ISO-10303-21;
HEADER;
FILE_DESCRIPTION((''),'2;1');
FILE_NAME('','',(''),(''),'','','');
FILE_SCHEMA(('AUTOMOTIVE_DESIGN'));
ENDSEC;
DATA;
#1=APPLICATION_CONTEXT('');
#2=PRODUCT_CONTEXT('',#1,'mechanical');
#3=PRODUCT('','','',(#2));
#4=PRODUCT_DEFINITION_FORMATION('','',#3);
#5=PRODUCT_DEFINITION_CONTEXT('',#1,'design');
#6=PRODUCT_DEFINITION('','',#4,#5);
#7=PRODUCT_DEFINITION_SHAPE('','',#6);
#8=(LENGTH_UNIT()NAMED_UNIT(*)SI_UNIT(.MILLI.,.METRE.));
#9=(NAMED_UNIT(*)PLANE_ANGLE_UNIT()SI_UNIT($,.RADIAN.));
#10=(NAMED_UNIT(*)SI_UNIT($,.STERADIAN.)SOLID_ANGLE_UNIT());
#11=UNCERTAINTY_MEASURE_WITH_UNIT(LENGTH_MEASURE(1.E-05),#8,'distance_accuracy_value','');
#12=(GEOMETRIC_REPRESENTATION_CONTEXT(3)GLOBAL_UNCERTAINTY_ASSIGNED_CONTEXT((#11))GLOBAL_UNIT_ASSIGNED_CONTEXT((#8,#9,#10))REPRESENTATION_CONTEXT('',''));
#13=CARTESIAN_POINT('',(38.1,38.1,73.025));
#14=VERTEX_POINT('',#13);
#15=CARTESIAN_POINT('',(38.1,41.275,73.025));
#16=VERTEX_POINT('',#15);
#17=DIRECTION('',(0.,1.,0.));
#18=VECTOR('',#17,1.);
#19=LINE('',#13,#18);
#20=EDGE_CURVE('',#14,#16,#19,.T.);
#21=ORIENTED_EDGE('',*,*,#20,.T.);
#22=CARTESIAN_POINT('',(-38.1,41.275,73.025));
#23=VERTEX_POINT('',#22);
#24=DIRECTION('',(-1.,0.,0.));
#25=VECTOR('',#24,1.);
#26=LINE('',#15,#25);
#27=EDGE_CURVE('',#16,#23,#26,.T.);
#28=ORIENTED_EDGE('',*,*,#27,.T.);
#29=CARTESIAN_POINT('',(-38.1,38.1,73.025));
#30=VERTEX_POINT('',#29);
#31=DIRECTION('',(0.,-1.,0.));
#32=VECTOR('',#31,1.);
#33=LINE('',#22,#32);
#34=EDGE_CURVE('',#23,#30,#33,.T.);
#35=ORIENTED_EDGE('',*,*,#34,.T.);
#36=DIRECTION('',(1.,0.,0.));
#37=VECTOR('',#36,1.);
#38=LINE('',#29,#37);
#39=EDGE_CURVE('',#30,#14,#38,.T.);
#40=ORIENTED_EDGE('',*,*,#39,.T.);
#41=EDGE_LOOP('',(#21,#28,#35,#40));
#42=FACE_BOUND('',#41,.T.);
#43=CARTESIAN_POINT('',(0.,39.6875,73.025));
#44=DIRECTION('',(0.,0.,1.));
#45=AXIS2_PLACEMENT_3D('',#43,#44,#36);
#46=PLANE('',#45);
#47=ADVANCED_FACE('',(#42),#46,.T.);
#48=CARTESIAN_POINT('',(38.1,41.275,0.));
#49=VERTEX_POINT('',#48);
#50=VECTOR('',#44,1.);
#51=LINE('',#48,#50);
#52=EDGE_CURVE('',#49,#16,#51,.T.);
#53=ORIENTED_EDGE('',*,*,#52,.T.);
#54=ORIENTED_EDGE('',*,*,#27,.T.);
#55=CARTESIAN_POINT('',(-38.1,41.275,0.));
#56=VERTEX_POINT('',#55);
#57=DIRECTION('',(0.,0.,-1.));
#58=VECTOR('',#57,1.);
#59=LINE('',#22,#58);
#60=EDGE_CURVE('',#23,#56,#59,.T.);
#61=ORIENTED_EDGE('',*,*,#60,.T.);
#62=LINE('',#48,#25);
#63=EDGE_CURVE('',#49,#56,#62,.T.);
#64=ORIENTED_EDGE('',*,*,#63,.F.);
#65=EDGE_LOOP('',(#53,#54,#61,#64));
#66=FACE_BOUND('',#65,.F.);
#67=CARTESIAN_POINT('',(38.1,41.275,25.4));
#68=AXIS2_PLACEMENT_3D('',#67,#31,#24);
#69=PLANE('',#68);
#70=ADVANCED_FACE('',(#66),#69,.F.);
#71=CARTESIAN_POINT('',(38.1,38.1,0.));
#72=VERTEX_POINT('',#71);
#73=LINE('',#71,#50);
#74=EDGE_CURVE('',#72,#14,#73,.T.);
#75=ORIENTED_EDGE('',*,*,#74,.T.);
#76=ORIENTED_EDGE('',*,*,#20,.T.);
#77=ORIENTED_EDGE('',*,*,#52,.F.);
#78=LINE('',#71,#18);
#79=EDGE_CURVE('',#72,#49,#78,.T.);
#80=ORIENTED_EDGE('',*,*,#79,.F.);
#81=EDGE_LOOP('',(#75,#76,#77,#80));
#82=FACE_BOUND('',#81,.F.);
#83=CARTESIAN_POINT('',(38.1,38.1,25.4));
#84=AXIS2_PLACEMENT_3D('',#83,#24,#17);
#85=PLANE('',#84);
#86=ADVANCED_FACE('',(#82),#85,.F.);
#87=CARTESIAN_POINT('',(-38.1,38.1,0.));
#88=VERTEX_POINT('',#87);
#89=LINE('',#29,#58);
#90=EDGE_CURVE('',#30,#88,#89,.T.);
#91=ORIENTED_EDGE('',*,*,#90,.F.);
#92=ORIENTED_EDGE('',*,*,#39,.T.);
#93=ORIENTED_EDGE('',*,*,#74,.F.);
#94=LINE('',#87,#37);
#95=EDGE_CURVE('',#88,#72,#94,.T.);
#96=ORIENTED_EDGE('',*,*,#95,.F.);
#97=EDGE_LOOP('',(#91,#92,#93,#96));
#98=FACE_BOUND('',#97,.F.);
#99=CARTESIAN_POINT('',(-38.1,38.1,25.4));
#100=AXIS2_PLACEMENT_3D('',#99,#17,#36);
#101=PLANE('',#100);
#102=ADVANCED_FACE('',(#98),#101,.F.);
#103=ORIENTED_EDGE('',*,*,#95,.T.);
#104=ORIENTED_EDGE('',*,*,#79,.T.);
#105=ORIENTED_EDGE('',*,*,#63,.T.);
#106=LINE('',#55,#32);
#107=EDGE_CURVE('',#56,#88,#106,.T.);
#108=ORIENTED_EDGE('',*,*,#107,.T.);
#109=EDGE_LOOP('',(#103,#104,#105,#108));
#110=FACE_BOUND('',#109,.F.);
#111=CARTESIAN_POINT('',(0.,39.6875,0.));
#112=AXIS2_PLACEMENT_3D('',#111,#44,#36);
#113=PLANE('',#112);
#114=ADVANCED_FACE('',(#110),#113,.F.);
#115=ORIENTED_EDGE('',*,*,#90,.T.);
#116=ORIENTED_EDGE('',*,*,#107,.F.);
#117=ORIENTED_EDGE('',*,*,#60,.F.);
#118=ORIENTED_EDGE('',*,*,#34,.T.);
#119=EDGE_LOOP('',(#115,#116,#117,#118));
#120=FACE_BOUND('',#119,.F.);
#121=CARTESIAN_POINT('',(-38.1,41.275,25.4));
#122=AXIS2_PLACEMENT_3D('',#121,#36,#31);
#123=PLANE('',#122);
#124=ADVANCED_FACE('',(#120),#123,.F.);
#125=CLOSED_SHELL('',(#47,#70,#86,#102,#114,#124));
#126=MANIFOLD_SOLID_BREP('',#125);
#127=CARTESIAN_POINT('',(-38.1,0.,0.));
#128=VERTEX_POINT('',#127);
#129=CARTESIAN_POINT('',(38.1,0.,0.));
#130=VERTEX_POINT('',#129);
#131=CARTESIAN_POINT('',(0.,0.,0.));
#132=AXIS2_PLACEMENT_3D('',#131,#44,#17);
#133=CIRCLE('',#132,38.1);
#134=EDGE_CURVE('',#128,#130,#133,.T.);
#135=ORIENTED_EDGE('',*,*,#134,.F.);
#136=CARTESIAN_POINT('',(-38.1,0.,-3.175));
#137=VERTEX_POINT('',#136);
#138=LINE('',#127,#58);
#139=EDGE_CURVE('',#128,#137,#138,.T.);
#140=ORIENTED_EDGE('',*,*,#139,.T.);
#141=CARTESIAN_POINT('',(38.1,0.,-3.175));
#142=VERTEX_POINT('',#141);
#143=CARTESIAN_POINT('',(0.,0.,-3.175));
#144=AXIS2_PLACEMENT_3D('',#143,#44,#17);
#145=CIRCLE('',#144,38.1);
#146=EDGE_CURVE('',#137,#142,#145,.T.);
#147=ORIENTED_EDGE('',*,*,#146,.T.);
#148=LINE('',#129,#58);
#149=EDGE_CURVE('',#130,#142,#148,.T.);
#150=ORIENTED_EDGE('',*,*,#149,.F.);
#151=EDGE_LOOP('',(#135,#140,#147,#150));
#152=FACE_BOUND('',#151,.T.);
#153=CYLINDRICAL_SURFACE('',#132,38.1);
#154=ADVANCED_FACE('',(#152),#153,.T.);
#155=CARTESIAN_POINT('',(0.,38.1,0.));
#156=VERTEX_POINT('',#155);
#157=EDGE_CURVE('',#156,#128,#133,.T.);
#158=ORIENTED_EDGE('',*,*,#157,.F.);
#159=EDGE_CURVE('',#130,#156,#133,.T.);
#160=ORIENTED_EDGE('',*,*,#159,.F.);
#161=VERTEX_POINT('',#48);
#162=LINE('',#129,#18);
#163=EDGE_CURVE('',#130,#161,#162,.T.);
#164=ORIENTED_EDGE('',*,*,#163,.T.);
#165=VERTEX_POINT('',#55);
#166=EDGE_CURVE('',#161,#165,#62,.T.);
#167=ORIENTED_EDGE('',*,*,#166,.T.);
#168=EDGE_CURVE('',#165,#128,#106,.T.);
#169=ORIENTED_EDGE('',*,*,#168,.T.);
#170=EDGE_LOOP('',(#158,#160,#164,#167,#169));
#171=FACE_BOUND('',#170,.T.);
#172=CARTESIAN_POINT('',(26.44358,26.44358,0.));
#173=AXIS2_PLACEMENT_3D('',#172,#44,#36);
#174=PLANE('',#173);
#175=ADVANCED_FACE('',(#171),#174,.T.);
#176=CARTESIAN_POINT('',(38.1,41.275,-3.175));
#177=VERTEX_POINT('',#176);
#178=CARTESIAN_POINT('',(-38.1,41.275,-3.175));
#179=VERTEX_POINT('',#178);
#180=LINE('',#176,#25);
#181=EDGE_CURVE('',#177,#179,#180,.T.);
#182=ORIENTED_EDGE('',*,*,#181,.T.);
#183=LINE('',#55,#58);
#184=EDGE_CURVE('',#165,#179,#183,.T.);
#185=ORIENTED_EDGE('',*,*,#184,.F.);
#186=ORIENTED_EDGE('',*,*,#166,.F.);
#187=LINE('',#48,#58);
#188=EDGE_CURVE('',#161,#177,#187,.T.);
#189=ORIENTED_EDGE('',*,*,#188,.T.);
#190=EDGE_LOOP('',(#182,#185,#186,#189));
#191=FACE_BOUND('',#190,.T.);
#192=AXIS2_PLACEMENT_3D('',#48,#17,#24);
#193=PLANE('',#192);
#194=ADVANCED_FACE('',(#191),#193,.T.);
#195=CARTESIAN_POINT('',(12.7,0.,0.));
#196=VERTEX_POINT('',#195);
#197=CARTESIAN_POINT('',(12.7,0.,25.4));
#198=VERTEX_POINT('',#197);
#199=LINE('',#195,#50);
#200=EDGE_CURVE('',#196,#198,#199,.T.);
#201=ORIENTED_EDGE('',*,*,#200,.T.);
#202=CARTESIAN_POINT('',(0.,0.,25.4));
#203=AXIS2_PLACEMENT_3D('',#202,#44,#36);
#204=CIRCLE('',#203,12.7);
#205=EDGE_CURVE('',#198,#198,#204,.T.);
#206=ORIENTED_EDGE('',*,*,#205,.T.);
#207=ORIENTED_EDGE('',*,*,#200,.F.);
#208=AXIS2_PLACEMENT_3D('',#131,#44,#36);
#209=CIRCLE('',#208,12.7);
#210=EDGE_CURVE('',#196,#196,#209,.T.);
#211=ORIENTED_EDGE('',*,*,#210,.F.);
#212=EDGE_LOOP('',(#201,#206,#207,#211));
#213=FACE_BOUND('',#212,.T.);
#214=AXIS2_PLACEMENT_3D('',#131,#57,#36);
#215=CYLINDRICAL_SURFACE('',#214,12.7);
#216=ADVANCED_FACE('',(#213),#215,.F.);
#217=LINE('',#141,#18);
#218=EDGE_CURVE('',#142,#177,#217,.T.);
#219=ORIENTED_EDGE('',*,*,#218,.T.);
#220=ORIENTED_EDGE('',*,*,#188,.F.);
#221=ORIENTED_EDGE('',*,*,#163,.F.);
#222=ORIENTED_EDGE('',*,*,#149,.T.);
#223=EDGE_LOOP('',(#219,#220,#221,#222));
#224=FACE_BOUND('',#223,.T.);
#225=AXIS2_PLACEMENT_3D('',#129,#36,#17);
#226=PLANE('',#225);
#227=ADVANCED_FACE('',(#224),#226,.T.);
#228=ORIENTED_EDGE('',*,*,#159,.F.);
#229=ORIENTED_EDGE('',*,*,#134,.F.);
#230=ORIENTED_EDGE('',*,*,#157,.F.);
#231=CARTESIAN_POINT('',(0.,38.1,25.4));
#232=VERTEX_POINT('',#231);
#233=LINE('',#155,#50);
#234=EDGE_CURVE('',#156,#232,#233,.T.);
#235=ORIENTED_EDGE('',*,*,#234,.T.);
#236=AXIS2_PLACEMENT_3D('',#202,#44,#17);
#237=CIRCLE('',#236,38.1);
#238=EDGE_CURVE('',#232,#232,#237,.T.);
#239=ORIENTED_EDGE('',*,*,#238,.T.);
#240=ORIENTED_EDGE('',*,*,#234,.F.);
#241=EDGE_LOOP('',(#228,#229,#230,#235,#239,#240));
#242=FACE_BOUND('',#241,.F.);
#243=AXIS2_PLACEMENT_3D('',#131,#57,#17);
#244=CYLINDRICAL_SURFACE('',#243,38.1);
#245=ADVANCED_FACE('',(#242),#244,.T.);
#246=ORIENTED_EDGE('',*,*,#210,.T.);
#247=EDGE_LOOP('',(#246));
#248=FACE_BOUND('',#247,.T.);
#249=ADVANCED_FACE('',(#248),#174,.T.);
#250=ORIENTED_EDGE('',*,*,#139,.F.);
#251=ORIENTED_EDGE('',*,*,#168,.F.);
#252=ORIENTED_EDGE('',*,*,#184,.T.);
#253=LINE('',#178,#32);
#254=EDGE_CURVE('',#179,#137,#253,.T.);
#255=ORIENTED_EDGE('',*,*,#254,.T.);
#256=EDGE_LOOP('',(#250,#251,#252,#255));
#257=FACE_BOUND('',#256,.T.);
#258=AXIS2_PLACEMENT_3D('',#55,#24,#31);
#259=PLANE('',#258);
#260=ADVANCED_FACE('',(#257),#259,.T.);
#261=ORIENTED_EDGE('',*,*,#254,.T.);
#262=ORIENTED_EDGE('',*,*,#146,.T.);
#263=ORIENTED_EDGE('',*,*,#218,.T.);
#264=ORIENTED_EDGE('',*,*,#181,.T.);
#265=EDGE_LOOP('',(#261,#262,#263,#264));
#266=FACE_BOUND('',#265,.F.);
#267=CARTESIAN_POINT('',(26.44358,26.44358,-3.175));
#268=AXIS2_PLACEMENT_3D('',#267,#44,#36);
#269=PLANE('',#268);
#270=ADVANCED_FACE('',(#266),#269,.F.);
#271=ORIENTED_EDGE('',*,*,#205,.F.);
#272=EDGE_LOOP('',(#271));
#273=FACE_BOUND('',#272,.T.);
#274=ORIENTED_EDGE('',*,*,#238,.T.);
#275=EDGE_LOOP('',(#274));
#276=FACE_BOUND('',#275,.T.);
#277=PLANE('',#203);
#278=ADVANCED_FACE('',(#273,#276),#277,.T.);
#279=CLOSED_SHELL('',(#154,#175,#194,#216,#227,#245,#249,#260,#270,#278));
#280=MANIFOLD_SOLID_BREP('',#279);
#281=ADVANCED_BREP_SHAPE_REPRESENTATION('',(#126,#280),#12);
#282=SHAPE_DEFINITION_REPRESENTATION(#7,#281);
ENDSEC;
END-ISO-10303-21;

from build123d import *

# Parameters (mm, degrees)
F1_DEPTH = 25.4
F0_R     = 12.7
F2_DEPTH = 3.175
F3_DEPTH = 47.625


with BuildPart() as f1:
    # F0 (on Top) → F1 (new body)
    with BuildSketch(Plane.XY):
        Polygon((-38.1, 38.1), (0, 38.1), (38.1, 38.1), (38.1, 41.275), (-38.1, 41.275), align=None)
    extrude(amount=F1_DEPTH)

    # F3 (add): a face of the model
    f3_faces = [f1.faces().sort_by_distance(p)[0] for p in [
        (0, 39.6875, 25.4),
    ]]
    extrude(f3_faces, amount=F3_DEPTH)


with BuildPart() as f1b:
    # F0 (on Top) → F1, piece 2 (new body)
    with BuildSketch(Plane.XY):
        with BuildLine():
            ThreePointArc((0, 38.1), (-26.9407683632, 26.9407683632), (-38.1, 0))
            ThreePointArc((-38.1, 0), (0, -38.1), (38.1, 0))
            ThreePointArc((38.1, 0), (26.9407683632, 26.9407683632), (0, 38.1))
        make_face()
        Circle(F0_R, mode=Mode.SUBTRACT)
    extrude(amount=F1_DEPTH)

    # F0 (on Top) → F2 (join)
    with BuildSketch(Plane.XY):
        with BuildLine():
            ThreePointArc((0, 38.1), (26.9407683632, 26.9407683632), (38.1, 0))
            Line((38.1, 0), (38.1, 38.1))
            Line((38.1, 38.1), (0, 38.1))
        make_face()
        with BuildLine():
            Line((-38.1, 38.1), (-38.1, 0))
            ThreePointArc((-38.1, 0), (-26.9407683632, 26.9407683632), (0, 38.1))
            Line((0, 38.1), (-38.1, 38.1))
        make_face()
        Polygon((-38.1, 38.1), (0, 38.1), (38.1, 38.1), (38.1, 41.275), (-38.1, 41.275), align=None)
        with BuildLine():
            ThreePointArc((0, 38.1), (-26.9407683632, 26.9407683632), (-38.1, 0))
            ThreePointArc((-38.1, 0), (0, -38.1), (38.1, 0))
            ThreePointArc((38.1, 0), (26.9407683632, 26.9407683632), (0, 38.1))
        make_face()
        Circle(F0_R, mode=Mode.SUBTRACT)
        Circle(F0_R)
    extrude(amount=-F2_DEPTH)


solid = Compound([f1.part, f1b.part])
